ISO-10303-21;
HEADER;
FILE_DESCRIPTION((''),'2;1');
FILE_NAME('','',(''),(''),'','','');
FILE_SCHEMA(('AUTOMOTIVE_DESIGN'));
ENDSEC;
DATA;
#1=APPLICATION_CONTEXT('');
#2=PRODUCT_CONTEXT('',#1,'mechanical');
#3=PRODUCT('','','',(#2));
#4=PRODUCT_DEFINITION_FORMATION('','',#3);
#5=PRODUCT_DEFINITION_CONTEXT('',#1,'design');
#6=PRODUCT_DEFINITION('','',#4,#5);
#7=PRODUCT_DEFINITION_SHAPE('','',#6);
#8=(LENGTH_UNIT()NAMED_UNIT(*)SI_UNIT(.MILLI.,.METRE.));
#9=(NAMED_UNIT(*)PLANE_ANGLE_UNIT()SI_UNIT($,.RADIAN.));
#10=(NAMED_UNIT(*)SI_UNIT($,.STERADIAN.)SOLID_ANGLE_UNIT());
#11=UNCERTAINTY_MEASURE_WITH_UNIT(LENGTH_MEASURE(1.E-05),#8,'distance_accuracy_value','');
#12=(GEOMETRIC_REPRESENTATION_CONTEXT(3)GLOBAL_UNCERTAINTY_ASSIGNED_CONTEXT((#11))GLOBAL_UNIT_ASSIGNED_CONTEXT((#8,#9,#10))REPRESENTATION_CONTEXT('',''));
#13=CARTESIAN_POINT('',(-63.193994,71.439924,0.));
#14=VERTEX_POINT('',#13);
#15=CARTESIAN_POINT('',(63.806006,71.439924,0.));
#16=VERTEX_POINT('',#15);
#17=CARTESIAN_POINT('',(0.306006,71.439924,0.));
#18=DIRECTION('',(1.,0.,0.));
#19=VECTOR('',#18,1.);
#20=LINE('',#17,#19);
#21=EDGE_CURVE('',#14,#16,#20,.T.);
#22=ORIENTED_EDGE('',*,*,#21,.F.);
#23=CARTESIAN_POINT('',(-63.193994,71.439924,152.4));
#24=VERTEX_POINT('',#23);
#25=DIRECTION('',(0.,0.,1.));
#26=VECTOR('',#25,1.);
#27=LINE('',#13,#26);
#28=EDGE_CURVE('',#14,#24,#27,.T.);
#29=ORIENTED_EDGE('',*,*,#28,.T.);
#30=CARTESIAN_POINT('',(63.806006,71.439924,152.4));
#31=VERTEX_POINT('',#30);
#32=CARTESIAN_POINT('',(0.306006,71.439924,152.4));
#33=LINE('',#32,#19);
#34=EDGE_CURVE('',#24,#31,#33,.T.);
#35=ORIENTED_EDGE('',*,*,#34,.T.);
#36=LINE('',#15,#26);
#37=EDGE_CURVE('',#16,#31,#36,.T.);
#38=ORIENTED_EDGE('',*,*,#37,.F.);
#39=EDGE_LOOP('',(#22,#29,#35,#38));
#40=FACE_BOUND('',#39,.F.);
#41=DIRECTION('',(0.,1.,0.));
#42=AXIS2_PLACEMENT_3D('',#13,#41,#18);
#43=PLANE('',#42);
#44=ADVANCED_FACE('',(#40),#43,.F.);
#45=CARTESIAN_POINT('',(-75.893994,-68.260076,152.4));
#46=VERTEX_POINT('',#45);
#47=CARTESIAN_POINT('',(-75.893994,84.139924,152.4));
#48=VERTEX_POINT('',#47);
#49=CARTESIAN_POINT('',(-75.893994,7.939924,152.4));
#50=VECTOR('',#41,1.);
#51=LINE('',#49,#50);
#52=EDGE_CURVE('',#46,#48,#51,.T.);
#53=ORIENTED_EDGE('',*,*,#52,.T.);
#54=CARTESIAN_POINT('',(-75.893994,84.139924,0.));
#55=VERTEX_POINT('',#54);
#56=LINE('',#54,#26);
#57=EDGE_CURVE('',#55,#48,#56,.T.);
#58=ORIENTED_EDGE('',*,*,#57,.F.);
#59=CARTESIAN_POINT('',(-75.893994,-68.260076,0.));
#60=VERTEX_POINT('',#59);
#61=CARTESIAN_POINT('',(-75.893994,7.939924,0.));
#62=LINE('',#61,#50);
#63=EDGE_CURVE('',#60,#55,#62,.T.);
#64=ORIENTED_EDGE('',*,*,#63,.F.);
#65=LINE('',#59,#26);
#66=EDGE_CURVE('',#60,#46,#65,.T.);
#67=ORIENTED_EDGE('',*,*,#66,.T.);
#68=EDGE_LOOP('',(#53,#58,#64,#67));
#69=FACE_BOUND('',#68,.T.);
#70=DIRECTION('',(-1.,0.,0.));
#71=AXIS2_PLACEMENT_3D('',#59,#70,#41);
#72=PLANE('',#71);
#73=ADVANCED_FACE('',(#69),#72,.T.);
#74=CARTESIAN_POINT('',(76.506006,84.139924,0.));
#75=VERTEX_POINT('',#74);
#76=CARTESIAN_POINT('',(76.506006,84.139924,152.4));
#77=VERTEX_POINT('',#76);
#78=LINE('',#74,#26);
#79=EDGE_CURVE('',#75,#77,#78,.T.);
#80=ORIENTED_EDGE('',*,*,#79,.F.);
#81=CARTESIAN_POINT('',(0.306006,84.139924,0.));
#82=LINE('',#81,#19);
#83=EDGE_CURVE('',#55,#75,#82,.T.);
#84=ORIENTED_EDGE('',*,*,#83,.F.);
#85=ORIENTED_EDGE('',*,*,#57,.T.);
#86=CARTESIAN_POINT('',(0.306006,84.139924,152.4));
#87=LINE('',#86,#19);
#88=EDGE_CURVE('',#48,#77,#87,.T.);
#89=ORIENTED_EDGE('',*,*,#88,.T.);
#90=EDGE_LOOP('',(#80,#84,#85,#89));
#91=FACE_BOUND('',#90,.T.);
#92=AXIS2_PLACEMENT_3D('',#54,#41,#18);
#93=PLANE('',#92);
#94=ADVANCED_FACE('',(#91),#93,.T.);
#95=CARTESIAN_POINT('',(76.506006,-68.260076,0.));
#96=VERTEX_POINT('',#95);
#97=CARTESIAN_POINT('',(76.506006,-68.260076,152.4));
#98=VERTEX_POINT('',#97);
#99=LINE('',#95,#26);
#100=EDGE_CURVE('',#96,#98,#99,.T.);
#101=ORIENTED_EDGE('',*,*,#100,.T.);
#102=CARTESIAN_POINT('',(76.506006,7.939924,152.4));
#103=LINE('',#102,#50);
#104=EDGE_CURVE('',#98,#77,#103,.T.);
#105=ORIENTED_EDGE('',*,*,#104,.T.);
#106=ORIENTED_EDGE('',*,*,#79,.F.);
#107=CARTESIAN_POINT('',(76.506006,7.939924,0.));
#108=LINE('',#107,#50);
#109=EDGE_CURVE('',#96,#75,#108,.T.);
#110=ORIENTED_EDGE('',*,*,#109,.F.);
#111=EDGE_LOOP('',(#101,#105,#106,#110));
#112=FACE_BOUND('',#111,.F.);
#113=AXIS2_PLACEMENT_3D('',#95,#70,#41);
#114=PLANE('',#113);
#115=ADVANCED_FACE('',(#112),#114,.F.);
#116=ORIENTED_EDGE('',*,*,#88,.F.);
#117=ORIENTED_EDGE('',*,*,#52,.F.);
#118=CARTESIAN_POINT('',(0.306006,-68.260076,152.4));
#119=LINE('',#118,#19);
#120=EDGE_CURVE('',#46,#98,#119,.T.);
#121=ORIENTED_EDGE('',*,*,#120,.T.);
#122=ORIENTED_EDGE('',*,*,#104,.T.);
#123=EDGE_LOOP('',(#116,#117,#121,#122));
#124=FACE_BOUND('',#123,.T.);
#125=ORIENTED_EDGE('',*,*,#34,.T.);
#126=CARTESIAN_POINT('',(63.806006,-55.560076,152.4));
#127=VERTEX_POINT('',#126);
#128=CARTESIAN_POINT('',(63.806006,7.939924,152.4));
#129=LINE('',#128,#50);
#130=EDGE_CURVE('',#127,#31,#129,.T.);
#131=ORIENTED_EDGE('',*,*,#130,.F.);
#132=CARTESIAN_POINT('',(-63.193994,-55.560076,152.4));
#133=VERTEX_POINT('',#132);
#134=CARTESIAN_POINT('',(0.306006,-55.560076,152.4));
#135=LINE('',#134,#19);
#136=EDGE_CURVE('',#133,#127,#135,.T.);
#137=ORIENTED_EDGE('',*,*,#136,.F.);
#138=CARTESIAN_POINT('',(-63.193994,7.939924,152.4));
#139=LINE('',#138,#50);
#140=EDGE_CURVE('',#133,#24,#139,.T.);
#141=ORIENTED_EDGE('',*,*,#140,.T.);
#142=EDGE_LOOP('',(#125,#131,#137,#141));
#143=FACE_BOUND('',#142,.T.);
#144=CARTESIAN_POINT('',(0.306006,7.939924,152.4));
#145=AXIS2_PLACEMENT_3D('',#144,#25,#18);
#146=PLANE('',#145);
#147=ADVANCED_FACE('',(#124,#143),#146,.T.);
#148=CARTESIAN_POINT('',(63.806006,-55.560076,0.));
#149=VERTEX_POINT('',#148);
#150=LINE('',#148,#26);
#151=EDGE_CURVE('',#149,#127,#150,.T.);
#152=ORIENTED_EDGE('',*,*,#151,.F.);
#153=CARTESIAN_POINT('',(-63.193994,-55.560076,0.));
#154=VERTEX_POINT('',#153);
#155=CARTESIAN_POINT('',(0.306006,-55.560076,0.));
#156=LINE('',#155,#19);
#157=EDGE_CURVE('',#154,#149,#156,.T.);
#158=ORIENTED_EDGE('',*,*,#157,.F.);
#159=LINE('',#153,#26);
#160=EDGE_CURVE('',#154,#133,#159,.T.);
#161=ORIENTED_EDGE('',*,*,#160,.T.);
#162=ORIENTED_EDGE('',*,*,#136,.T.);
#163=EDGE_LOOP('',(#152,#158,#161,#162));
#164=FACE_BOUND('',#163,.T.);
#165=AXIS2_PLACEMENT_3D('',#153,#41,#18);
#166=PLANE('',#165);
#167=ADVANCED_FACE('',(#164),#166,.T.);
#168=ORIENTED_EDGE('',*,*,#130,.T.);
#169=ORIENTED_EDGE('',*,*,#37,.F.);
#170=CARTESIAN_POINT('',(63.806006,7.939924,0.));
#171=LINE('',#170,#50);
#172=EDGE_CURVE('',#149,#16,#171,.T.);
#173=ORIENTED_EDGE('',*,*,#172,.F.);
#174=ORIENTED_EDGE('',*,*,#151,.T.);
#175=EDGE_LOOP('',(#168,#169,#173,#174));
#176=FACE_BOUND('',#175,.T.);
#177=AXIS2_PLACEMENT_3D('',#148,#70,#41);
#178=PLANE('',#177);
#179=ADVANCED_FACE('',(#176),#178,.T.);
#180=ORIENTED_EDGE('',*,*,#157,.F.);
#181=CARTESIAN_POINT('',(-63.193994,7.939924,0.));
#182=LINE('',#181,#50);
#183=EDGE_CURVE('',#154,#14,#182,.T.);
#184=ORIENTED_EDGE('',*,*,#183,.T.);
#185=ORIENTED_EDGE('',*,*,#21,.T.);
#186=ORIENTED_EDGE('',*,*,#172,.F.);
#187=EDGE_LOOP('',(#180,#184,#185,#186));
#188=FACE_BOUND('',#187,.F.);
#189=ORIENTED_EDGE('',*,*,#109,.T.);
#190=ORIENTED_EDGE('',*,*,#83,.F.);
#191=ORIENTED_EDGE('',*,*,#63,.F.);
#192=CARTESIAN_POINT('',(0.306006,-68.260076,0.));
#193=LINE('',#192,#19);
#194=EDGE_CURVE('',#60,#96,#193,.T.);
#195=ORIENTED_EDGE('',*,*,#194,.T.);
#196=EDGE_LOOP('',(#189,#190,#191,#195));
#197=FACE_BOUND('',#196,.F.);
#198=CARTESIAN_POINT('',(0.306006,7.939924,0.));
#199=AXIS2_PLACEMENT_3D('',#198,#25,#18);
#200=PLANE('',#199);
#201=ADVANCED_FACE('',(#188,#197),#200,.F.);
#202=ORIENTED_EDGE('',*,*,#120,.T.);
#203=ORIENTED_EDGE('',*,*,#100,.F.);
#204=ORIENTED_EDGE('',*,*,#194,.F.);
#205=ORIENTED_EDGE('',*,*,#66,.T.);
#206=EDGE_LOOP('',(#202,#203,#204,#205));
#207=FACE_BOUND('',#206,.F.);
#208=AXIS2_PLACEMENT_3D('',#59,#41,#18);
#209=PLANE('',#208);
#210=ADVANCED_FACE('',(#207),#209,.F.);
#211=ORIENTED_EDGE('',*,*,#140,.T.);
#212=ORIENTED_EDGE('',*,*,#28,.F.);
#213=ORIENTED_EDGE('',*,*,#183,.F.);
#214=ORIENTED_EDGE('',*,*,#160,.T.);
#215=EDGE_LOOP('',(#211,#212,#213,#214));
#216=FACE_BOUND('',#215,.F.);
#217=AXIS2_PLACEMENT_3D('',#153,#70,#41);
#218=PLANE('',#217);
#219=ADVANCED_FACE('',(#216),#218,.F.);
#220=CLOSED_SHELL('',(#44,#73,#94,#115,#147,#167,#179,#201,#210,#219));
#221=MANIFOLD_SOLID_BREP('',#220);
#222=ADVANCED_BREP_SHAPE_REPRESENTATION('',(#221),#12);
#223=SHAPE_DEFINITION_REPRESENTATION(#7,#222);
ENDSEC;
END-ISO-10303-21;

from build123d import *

# Parameters (mm, degrees)
F1_W     = 152.4
F1_H     = 152.4
F1_W_2   = 127
F1_H_2   = 127
F2_DEPTH = 152.4


# Not quite as in the source:
# - a variable given as a bare number and used for a length is read in inches; the dataset says mm whatever the document's units were


with BuildPart() as f2:
    # F1 (on Top) → F2 (new body)
    with BuildSketch(Plane.XY):
        with Locations((0.3060060553, 7.9399240886)):
            Rectangle(F1_W, F1_H)
        with Locations((0.3060060553, 7.9399240886)):
            Rectangle(F1_W_2, F1_H_2, mode=Mode.SUBTRACT)
    extrude(amount=F2_DEPTH)


solid = f2.part
